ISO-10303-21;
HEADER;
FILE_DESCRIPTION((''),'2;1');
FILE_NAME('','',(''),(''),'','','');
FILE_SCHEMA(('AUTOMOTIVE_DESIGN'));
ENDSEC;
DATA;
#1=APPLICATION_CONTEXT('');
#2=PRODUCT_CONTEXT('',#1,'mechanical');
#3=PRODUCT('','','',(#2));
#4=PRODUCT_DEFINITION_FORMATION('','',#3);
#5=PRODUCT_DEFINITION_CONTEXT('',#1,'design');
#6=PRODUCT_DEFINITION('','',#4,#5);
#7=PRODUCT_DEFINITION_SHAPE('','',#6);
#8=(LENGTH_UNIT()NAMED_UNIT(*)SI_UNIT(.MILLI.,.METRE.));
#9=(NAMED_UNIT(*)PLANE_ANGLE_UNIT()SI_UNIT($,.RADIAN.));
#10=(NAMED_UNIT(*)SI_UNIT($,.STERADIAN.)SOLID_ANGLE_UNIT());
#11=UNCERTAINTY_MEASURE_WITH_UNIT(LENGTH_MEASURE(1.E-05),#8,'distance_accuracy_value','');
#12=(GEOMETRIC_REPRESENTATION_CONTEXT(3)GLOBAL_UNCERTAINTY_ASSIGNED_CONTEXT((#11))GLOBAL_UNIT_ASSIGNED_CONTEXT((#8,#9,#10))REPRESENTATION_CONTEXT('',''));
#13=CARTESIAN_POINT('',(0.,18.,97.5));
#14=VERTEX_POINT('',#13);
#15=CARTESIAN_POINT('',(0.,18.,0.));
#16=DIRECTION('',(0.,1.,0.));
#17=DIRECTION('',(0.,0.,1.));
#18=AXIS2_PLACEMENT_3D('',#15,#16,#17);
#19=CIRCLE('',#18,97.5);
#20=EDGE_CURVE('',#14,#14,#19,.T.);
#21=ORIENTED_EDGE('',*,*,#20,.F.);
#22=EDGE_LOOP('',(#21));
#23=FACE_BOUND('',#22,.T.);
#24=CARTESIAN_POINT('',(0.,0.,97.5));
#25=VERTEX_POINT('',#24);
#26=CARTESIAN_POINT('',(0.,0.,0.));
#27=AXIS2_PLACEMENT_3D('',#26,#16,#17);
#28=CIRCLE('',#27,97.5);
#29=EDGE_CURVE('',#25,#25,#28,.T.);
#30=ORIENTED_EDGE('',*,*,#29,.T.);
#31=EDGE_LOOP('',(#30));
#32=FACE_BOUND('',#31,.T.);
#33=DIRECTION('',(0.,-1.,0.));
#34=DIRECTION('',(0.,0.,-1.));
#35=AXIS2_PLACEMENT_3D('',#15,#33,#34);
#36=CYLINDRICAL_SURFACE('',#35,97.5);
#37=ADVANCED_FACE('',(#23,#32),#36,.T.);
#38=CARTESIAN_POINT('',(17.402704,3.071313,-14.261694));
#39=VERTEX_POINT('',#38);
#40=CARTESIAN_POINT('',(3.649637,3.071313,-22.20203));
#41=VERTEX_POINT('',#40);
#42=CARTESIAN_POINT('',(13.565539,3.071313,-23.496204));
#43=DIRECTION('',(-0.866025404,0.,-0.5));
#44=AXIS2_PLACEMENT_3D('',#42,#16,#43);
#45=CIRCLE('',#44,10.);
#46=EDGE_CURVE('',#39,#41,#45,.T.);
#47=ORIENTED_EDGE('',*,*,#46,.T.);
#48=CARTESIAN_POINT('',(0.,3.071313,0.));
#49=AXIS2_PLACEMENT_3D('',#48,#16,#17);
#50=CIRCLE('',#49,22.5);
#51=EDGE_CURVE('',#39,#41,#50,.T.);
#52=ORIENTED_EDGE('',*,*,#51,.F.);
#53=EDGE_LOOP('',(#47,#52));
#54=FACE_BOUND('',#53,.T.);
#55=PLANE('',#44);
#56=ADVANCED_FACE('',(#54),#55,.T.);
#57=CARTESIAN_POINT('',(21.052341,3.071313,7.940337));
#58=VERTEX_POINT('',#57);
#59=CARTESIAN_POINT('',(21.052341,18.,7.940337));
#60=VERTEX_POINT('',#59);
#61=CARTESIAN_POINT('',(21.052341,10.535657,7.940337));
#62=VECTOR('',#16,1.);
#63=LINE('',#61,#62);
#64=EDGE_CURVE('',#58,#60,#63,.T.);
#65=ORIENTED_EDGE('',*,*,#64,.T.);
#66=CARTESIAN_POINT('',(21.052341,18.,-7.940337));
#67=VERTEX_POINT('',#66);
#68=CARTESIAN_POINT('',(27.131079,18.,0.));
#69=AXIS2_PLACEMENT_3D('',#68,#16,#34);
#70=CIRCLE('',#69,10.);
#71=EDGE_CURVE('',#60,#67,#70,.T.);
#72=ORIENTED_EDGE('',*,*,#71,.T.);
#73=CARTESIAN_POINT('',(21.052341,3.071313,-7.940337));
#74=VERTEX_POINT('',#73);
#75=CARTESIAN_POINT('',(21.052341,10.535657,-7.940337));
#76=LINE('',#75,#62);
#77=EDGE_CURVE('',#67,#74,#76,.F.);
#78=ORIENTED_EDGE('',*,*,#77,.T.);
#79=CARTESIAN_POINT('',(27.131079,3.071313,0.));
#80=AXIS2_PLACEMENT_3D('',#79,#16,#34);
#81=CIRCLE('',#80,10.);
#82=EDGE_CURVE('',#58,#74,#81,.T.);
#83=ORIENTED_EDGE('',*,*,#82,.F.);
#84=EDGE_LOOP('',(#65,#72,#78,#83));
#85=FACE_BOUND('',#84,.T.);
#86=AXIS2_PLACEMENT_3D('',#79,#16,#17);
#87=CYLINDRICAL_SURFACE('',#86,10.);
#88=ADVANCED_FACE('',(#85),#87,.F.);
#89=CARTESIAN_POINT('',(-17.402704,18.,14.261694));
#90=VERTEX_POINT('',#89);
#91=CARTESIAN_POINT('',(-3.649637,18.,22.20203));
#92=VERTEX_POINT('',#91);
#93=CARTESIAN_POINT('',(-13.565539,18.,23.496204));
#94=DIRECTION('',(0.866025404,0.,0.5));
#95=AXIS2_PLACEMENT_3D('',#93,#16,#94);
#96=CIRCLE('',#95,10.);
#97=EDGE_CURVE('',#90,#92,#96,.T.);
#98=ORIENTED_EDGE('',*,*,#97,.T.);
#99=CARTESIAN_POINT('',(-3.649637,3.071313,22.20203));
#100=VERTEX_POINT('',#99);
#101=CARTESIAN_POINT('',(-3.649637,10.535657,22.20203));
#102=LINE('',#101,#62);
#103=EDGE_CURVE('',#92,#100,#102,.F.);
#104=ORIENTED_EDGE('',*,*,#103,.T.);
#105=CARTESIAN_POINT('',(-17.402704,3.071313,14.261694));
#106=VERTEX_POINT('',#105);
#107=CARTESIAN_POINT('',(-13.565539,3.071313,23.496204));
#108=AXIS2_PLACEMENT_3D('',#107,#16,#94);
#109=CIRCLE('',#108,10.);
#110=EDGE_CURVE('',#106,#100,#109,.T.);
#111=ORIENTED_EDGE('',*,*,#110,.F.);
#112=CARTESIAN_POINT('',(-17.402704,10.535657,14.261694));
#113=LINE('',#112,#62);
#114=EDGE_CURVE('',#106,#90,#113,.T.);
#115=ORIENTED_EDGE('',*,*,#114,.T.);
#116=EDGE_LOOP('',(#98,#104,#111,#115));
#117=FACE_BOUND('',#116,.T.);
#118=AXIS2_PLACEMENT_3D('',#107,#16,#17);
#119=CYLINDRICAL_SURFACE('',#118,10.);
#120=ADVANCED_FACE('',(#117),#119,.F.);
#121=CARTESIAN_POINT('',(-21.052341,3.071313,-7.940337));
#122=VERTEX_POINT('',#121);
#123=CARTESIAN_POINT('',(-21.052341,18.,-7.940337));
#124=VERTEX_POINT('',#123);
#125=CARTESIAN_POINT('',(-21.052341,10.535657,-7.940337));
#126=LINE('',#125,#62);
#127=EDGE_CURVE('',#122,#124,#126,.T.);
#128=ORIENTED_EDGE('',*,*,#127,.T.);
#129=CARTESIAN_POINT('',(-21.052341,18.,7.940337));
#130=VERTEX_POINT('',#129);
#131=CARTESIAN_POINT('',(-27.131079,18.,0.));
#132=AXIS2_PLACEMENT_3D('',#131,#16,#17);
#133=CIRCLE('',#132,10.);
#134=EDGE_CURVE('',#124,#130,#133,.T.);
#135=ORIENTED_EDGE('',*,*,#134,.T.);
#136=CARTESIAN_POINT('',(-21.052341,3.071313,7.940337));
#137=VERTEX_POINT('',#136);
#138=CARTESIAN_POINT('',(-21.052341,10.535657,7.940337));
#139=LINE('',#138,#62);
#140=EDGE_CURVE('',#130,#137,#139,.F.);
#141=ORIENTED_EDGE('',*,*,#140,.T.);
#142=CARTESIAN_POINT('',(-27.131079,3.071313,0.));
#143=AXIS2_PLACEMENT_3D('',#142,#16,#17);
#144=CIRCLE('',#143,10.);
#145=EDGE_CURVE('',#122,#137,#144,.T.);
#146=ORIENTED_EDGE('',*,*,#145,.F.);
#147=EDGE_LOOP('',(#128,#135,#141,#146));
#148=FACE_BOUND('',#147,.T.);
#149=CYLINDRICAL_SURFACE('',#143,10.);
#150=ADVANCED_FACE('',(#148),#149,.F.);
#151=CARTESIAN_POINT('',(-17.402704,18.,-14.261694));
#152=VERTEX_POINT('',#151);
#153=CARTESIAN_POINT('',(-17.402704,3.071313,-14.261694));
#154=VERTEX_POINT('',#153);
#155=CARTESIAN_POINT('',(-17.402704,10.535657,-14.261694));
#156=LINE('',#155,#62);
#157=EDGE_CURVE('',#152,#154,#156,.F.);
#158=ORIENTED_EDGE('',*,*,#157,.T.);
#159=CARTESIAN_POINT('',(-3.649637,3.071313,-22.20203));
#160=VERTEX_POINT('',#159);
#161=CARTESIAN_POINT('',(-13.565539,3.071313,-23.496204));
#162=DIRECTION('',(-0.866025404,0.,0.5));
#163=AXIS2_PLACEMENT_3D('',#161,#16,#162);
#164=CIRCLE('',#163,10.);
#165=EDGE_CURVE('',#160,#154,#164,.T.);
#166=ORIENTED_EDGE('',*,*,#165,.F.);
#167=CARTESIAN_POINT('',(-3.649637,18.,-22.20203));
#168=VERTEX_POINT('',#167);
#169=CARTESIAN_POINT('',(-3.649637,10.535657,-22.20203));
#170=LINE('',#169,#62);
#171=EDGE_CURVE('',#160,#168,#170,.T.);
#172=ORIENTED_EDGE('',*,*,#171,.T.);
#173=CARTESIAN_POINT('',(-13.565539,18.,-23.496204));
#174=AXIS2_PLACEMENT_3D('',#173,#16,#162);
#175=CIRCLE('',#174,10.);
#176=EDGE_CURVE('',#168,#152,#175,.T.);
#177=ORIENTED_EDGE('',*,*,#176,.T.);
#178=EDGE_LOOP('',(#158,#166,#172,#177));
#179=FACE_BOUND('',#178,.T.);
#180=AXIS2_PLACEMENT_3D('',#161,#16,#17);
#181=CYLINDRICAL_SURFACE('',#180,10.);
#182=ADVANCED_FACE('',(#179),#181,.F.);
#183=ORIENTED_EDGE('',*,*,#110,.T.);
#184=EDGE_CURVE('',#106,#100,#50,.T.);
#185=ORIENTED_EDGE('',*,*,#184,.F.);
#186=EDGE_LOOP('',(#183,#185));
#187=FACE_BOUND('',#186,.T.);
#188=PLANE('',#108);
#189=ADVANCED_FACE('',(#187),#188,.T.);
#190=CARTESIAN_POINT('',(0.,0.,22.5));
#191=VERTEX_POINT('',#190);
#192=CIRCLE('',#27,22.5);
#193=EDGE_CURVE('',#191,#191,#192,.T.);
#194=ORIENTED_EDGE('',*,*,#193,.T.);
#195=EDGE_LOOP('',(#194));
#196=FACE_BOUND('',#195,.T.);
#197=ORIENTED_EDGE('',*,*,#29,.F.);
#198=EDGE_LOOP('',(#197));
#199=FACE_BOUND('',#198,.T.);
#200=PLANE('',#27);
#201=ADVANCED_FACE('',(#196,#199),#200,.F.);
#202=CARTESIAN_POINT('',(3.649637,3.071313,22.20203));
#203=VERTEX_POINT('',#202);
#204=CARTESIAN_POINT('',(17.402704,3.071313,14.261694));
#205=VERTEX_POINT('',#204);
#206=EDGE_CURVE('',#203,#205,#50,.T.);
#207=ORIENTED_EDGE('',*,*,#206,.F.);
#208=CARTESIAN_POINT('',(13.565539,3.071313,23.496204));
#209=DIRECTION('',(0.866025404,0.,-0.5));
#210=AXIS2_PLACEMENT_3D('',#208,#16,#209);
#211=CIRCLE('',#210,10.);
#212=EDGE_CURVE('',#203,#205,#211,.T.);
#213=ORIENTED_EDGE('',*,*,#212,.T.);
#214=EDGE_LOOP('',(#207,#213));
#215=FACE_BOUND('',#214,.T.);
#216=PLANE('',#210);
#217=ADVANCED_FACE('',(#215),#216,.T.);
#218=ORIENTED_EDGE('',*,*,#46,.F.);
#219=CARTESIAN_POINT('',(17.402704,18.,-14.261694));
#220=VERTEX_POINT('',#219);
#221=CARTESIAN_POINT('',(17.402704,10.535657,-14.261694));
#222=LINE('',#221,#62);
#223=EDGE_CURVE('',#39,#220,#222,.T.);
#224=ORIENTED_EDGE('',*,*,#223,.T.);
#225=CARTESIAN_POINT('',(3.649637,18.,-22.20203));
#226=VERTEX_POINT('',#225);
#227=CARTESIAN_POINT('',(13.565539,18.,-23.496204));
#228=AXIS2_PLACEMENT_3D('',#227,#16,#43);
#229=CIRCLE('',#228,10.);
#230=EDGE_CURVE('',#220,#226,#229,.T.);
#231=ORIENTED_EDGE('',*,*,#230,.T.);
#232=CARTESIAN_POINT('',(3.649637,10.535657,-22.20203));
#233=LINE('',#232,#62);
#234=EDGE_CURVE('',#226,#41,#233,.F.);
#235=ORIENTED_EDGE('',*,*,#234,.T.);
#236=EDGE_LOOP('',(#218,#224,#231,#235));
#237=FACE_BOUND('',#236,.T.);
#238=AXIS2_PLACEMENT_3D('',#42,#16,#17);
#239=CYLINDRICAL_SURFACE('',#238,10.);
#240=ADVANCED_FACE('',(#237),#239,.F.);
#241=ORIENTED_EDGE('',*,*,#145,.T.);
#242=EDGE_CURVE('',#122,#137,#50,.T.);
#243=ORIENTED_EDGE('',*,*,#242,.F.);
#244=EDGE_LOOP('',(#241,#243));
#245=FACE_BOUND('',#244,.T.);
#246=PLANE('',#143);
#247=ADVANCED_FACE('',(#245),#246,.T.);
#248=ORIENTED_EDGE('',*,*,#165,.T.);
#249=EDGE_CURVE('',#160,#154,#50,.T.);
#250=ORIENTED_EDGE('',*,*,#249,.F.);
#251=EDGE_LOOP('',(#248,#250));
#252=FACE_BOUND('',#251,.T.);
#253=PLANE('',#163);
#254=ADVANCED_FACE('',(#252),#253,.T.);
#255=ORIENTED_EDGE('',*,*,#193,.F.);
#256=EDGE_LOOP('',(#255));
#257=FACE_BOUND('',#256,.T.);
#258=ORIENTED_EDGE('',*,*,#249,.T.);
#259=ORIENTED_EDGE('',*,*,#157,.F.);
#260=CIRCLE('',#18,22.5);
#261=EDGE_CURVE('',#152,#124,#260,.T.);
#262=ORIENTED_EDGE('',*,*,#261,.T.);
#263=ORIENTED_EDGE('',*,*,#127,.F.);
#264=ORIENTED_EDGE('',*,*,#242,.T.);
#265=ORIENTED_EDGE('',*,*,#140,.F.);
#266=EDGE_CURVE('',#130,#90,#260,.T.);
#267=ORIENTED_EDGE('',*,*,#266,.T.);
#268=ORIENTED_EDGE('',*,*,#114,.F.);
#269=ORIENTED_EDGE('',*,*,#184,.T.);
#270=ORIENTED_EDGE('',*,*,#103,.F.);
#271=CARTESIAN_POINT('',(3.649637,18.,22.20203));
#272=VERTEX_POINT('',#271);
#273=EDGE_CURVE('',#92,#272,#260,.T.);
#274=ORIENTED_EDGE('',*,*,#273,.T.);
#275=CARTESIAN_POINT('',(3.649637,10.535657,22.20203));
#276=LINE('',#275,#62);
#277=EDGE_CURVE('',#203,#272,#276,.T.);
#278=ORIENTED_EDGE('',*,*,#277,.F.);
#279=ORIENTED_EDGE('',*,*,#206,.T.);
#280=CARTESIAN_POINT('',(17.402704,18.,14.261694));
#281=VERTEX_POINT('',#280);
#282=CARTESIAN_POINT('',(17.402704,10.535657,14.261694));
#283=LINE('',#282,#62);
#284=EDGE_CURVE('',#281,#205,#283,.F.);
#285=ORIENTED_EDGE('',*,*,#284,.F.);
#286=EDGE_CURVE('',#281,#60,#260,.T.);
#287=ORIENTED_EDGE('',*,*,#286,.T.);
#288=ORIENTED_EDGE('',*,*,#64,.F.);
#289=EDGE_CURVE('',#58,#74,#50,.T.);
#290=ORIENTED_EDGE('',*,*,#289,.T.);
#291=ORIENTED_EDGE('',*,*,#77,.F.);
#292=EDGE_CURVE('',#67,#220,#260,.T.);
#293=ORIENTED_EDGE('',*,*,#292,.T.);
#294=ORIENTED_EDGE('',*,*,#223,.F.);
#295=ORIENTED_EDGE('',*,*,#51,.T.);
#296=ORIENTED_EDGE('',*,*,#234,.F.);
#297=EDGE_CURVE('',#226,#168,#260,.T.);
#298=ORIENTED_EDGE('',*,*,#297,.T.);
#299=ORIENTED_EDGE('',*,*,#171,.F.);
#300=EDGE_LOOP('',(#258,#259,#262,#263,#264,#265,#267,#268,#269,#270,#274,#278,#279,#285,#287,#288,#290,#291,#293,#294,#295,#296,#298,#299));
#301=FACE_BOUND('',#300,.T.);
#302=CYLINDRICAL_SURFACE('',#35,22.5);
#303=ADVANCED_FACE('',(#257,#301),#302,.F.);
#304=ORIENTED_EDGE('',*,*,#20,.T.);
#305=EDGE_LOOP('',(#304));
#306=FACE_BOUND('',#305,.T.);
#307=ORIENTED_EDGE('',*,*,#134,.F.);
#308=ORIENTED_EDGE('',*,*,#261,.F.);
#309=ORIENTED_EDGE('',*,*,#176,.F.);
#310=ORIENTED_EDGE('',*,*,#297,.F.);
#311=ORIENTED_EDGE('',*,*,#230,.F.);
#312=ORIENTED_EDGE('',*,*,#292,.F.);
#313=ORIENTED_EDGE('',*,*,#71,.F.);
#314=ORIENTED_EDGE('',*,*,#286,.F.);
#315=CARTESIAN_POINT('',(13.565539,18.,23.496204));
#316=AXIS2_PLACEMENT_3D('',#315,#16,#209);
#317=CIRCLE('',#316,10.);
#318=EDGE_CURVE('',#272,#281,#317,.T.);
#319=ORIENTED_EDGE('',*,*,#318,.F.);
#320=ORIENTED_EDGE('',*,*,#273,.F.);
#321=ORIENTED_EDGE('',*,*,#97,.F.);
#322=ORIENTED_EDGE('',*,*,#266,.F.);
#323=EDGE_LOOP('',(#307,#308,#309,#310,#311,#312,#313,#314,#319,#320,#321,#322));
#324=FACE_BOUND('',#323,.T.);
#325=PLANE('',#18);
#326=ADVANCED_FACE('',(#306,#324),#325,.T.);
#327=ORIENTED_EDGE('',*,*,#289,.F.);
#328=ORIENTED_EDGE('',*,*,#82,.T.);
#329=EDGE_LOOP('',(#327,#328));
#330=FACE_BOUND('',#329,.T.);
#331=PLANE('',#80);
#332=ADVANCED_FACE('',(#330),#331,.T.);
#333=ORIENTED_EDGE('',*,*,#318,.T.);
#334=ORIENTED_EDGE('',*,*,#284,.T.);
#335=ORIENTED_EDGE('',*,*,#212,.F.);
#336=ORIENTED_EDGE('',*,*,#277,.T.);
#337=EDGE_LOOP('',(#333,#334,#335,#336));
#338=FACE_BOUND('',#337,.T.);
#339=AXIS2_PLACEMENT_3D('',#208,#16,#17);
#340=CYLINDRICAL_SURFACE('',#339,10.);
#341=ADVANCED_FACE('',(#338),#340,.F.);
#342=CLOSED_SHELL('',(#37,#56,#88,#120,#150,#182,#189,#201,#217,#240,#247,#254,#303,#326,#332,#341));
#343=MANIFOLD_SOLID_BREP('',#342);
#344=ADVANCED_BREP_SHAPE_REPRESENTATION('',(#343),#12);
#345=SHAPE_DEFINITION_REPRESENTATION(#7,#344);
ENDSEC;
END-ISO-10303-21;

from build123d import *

# Parameters (mm, degrees)
SKETCH1_R           = 97.5
BOSS_EXTRUDE1_DEPTH = 18
SKETCH2_R           = 22.5
CUT_EXTRUDE1_DEPTH  = 140.055744218
SKETCH3_R           = 10
CUT_EXTRUDE2_DEPTH  = 14.928686613
CIRPATTERN1_COUNT   = 6


with BuildPart() as part:
    # Sketch1 → Boss-Extrude1 (new body)
    with BuildSketch(Plane(origin=(0, 0, 0), x_dir=(1, 0, 0), z_dir=(0, 1, 0))):
        Circle(SKETCH1_R)
    extrude(amount=BOSS_EXTRUDE1_DEPTH)

    # Sketch2 → Cut-Extrude1 (cut, through all)
    with BuildSketch(Plane(origin=(0, 0, 0), x_dir=(1, 0, 0), z_dir=(0, 1, 0))):
        Circle(SKETCH2_R)
    extrude(amount=CUT_EXTRUDE1_DEPTH, mode=Mode.SUBTRACT)

    # Sketch3 → Cut-Extrude2 (cut)
    with BuildSketch(Plane(origin=(0, 18, 0), x_dir=(1, 0, 0), z_dir=(0, 1, 0))):
        with Locations((-27.131078865, 0)):
            Circle(SKETCH3_R)
    cut_extrude2 = extrude(amount=-CUT_EXTRUDE2_DEPTH, mode=Mode.SUBTRACT)

    # CirPattern1: Cut-Extrude2 ×6 about axis
    cirpattern1_axis = Axis((0, 0, 0), (0, 1, 0))
    for i in range(1, CIRPATTERN1_COUNT):
        add(cut_extrude2.rotate(cirpattern1_axis, i * 360 / CIRPATTERN1_COUNT), mode=Mode.SUBTRACT)


solid = part.part
